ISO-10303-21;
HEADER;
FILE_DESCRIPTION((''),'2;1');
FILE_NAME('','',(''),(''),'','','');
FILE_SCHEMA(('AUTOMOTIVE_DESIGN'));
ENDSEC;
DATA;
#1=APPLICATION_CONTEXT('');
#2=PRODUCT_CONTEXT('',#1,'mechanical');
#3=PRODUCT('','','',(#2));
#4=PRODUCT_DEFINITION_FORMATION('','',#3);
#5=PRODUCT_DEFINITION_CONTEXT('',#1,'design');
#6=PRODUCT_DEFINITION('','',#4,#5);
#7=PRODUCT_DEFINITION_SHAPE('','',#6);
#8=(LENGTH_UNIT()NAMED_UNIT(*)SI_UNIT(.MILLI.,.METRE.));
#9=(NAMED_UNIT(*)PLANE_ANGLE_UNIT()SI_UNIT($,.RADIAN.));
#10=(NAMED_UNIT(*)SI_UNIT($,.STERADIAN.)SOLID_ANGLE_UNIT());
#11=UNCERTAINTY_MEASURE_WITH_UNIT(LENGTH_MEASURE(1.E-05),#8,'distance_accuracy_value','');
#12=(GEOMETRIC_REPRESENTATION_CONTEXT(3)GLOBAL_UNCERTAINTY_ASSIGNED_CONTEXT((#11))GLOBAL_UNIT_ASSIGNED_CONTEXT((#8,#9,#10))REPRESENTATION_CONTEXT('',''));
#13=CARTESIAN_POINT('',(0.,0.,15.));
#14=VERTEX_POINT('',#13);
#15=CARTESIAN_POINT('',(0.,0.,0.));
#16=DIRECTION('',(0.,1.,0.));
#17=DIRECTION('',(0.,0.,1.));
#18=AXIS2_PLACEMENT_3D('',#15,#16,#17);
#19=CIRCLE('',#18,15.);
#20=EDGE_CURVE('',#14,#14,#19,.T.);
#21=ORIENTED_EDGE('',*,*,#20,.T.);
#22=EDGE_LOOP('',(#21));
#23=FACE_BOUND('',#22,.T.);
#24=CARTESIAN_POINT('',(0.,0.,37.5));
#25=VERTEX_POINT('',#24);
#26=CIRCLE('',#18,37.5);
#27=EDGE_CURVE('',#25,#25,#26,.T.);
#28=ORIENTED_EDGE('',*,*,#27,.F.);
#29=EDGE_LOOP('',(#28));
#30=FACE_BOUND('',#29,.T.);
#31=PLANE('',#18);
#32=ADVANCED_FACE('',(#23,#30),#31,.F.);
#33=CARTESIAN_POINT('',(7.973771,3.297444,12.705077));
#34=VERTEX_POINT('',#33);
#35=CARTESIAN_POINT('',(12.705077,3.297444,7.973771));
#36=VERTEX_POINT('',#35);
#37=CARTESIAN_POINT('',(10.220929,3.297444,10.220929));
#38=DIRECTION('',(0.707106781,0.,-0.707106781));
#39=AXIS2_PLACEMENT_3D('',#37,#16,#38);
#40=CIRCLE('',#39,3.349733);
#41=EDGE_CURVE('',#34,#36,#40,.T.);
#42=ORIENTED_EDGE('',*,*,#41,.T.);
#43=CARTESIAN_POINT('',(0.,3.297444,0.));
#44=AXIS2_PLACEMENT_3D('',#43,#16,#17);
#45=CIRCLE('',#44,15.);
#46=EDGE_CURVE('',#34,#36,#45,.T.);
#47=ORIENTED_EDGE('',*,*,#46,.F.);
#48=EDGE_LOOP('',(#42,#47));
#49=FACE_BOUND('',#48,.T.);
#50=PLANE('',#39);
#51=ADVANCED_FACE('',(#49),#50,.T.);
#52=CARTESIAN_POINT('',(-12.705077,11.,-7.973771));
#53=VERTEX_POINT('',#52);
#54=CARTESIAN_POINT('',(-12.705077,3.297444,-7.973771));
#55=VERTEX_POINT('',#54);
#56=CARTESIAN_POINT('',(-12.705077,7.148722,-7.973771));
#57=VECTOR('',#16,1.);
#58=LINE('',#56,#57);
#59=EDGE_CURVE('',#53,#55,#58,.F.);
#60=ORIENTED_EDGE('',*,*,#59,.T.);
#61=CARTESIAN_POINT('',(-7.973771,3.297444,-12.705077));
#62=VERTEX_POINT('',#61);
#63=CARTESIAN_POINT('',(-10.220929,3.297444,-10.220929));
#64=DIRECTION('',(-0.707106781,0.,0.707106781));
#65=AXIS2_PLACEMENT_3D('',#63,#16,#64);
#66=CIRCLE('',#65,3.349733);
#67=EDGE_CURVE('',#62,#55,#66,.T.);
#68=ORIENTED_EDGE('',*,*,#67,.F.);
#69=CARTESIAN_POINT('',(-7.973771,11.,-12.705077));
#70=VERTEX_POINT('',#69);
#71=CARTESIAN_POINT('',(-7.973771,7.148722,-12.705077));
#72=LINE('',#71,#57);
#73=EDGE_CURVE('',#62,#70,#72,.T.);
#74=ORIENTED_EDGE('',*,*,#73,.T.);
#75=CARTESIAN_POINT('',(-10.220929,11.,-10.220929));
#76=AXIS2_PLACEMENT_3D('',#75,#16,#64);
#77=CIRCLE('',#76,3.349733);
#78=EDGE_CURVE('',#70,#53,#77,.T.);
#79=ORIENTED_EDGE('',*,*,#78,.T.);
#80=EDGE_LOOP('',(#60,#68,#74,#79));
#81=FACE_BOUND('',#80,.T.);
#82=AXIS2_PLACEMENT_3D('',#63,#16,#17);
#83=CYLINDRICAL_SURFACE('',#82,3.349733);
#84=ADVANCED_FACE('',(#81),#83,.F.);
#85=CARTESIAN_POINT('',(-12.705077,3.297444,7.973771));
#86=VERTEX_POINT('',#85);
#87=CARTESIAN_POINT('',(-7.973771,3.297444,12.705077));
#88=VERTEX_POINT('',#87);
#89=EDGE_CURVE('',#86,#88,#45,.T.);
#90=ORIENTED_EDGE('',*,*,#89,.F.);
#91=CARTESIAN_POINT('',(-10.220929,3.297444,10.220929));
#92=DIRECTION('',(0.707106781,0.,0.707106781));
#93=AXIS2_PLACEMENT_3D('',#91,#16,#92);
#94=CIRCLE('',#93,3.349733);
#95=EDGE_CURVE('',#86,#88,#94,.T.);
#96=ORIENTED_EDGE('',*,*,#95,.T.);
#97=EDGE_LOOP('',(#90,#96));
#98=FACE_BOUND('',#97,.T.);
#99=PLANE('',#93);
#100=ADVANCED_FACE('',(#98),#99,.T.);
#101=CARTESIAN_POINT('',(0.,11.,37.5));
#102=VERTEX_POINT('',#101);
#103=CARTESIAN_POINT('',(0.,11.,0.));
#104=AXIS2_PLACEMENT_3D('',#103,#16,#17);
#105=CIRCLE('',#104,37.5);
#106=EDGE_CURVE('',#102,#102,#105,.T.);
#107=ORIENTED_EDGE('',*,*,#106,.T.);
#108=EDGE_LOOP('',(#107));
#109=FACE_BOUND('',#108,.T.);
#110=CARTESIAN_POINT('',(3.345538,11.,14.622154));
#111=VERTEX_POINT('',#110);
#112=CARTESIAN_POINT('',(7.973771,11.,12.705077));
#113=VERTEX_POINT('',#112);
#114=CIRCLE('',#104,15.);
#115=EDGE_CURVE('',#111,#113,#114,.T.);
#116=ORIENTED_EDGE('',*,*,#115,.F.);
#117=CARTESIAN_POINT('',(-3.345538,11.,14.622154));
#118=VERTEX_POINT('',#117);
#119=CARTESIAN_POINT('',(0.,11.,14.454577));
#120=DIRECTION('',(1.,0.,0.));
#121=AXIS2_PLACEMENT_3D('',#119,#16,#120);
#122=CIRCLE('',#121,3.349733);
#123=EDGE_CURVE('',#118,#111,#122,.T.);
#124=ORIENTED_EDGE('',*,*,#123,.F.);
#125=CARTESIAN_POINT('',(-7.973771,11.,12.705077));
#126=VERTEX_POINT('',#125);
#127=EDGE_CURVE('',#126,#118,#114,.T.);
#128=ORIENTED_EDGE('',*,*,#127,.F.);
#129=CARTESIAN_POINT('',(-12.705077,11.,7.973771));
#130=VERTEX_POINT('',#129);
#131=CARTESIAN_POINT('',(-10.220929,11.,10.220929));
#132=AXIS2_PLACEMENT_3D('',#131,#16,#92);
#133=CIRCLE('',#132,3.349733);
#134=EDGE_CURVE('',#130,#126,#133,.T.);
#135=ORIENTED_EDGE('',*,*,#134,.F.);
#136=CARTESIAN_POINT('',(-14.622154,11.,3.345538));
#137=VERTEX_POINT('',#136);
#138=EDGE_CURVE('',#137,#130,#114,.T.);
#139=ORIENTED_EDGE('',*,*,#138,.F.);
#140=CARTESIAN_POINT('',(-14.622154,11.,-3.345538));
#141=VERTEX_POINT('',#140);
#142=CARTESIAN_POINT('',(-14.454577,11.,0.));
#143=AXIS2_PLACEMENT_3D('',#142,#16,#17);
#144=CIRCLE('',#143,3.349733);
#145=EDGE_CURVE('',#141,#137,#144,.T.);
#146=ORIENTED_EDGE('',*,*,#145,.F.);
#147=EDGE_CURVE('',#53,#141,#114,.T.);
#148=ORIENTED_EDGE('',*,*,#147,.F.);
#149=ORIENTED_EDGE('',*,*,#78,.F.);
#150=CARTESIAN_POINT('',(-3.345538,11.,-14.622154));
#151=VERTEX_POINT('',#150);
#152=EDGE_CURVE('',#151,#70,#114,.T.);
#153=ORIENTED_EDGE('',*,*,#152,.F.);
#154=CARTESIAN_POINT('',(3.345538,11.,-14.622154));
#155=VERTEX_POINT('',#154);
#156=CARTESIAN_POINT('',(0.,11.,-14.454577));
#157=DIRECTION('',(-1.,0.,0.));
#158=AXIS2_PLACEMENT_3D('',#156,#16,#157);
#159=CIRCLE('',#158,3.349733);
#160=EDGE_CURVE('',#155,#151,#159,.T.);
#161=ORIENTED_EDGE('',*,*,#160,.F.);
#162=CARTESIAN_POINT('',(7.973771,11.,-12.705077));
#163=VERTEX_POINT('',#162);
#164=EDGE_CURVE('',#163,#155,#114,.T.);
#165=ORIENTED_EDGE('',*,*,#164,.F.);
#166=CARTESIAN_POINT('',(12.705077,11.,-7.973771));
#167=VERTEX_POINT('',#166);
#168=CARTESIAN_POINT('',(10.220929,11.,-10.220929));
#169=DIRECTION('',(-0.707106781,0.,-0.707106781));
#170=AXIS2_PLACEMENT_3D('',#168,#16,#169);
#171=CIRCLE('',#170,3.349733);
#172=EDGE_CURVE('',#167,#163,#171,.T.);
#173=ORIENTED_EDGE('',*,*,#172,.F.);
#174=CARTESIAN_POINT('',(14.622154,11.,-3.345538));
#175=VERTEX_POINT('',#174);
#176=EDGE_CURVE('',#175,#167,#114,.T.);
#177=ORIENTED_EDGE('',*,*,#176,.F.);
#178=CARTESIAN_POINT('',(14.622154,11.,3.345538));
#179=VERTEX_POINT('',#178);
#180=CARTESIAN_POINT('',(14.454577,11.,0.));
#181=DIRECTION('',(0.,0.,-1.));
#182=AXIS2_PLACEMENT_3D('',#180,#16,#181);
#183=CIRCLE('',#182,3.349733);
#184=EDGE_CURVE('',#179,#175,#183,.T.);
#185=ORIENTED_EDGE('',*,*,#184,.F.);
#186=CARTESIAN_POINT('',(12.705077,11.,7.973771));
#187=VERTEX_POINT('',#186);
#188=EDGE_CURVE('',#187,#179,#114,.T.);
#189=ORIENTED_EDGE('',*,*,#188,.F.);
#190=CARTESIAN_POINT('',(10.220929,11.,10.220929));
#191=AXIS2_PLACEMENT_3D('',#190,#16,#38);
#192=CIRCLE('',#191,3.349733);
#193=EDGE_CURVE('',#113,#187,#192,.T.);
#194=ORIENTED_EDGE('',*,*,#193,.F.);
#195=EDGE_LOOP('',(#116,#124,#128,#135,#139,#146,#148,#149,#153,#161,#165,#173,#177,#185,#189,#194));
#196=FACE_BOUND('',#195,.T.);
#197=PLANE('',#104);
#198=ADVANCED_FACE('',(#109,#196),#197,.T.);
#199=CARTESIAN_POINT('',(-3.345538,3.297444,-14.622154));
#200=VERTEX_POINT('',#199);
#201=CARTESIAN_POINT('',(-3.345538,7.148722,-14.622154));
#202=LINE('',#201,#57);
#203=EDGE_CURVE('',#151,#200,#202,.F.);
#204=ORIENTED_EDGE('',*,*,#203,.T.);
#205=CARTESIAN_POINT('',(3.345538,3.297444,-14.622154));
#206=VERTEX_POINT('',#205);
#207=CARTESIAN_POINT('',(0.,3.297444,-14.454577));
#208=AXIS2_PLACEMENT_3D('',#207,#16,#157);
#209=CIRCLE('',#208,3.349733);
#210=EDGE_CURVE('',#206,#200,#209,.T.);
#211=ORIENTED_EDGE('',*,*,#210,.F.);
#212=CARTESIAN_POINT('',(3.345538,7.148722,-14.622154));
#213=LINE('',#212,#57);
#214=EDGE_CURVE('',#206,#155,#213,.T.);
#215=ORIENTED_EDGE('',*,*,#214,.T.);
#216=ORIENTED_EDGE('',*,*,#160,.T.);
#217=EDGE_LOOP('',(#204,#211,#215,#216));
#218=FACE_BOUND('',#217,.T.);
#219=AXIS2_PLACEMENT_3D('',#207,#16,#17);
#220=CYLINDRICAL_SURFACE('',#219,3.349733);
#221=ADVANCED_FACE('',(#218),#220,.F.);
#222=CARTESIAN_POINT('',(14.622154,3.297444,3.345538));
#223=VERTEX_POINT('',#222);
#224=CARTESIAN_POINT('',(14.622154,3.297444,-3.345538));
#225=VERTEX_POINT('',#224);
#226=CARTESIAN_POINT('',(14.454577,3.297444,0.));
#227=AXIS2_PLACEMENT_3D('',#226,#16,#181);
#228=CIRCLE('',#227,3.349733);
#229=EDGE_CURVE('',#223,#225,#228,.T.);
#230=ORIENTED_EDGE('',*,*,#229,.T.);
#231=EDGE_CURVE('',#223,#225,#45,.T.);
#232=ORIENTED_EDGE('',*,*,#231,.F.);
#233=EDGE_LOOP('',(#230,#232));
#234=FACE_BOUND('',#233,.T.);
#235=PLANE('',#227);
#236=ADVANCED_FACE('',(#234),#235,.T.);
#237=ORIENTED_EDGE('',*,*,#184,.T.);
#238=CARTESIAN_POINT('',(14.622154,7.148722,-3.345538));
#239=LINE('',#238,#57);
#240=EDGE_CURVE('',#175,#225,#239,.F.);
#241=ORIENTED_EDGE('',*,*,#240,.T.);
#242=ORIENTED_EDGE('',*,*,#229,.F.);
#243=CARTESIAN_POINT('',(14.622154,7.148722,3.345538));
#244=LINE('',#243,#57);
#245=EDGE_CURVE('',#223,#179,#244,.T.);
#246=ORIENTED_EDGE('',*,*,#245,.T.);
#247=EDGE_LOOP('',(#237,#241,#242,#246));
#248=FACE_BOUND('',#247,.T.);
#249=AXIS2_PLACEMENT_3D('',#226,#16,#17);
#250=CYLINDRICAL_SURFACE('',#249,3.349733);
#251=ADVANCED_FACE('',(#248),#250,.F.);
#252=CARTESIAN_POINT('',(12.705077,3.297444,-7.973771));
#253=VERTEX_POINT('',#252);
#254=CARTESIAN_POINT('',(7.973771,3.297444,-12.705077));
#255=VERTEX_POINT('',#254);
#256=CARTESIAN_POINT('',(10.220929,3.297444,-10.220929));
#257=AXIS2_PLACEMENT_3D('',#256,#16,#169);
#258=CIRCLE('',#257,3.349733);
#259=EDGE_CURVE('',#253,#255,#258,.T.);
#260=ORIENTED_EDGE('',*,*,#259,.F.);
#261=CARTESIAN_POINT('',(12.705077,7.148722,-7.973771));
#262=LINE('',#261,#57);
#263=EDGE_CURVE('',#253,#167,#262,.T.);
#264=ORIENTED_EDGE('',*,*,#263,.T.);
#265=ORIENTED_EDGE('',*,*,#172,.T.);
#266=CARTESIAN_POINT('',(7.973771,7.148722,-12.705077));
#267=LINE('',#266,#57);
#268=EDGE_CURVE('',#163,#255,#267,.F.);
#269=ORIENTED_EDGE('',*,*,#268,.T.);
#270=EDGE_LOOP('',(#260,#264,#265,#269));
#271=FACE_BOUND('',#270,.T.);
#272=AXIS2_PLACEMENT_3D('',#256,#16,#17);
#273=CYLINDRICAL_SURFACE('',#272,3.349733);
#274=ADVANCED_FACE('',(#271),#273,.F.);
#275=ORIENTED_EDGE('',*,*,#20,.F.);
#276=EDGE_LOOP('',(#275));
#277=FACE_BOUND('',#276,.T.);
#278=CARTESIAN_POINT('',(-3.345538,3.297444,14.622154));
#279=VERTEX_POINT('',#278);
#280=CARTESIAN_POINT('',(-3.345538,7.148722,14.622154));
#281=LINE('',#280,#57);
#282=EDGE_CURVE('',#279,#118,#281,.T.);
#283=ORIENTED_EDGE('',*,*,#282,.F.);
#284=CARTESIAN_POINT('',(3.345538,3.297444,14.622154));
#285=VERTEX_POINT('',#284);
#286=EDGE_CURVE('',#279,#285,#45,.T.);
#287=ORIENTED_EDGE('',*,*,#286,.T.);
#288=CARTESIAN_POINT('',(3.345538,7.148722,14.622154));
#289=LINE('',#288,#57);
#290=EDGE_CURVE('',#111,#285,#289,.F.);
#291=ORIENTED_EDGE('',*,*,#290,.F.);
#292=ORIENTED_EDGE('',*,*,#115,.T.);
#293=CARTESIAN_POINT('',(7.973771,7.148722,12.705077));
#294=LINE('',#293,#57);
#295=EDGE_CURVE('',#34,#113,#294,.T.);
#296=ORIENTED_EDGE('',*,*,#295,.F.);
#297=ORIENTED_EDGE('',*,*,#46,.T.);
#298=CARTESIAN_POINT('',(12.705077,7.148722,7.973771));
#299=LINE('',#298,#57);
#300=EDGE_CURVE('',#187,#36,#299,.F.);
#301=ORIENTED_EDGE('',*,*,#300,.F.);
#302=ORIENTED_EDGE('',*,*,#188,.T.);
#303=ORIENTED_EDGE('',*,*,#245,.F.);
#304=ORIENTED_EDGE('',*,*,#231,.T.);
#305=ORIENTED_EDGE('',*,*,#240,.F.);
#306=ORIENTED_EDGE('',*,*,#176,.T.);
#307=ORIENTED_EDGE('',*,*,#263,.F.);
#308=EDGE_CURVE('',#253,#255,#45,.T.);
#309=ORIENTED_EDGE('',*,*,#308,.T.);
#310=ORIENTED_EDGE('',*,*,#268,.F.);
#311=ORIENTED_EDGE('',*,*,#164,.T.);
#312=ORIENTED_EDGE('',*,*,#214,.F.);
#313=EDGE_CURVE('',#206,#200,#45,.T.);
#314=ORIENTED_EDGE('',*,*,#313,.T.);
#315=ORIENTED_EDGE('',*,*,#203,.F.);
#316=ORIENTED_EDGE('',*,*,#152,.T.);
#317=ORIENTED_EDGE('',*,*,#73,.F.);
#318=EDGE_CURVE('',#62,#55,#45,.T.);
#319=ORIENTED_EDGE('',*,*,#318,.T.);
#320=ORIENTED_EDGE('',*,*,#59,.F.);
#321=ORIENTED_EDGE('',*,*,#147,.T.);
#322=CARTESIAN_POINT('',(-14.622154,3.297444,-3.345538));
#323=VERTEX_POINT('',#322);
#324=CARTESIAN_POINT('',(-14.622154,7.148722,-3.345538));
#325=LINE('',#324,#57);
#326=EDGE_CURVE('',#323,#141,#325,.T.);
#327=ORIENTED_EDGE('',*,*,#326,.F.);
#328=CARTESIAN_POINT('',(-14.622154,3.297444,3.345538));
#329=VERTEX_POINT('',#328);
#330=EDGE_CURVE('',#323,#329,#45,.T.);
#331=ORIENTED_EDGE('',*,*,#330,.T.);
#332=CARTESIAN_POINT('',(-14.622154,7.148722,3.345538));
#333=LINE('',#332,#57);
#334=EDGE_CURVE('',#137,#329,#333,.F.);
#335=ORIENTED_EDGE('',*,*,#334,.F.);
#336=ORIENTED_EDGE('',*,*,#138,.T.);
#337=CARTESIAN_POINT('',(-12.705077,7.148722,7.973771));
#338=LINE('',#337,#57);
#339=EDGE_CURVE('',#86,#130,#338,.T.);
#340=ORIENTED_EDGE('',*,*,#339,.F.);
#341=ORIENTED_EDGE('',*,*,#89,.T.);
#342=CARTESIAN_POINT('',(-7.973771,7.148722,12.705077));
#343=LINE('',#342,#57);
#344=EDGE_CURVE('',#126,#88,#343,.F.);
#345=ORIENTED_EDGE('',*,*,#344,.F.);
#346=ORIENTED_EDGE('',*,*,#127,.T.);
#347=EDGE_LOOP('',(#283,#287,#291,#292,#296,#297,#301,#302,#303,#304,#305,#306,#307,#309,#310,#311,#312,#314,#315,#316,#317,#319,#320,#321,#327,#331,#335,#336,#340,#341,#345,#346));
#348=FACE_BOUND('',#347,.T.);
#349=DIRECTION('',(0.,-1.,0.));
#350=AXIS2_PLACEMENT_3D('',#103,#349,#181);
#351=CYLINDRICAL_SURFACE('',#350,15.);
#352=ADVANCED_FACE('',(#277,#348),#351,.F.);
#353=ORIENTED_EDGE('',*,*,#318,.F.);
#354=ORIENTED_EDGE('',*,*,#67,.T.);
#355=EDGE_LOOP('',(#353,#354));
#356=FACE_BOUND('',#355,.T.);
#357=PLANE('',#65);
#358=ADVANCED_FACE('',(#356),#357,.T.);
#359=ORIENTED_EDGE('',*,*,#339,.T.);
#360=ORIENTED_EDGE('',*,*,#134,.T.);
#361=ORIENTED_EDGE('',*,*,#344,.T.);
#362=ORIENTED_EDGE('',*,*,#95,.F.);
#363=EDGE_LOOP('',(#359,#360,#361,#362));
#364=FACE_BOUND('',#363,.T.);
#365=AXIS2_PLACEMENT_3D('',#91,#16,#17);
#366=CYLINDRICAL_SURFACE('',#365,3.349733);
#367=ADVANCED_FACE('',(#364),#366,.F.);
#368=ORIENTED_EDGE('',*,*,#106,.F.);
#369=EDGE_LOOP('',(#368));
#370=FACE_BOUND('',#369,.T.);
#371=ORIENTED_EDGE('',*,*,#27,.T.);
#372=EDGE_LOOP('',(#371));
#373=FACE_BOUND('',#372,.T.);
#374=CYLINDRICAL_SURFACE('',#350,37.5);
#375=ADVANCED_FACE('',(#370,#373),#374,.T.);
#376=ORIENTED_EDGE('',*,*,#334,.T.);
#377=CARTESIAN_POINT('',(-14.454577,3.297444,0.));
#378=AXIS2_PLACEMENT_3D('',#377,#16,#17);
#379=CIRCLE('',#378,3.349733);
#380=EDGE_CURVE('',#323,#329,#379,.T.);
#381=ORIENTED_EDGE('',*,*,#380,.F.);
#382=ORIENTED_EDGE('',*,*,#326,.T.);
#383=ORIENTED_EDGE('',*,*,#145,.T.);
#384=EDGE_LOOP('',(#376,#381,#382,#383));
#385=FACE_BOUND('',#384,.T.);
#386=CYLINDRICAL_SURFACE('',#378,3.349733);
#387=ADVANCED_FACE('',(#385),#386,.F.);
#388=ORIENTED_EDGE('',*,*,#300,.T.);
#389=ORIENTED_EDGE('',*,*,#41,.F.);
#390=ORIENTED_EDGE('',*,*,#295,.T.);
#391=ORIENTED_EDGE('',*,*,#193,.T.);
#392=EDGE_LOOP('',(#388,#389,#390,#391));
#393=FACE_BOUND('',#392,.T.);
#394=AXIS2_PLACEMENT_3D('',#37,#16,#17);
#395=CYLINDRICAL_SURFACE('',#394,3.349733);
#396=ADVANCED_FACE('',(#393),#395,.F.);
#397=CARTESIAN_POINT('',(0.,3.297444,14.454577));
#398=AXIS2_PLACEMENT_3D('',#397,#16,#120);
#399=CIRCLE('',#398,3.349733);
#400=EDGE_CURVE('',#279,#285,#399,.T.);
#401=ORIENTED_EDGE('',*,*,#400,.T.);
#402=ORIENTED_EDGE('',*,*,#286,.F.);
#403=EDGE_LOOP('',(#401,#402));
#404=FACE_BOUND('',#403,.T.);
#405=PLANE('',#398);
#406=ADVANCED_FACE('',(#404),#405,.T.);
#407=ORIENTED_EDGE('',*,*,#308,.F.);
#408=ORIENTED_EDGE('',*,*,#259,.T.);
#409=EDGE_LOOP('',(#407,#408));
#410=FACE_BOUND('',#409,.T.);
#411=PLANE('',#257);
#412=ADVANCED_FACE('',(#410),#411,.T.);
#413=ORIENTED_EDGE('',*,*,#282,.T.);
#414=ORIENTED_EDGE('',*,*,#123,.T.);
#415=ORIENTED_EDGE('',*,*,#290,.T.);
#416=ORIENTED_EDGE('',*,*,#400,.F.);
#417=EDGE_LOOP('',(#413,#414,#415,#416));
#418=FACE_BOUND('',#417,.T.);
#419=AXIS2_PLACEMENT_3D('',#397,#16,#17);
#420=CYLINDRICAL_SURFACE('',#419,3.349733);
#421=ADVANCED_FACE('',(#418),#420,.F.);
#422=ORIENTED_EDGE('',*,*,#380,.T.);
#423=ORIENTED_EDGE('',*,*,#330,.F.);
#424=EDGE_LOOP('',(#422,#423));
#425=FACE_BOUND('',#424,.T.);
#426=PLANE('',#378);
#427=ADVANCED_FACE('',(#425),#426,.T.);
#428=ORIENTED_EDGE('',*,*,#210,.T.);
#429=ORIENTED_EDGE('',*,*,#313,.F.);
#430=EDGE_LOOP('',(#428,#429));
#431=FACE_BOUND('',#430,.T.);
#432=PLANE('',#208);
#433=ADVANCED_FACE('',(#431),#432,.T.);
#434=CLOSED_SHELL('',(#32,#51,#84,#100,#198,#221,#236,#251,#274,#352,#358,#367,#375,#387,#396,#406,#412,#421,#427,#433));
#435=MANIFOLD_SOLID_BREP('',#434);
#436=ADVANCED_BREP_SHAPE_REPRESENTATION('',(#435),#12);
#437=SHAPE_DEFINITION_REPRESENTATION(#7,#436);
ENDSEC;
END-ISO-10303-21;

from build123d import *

# Parameters (mm, degrees)
SKETCH1_R           = 37.5
BOSS_EXTRUDE1_DEPTH = 11
SKETCH2_R           = 15
CUT_EXTRUDE1_DEPTH  = 55.161794653
SKETCH3_R           = 3.349732629
CUT_EXTRUDE2_DEPTH  = 7.702556447
CIRPATTERN1_COUNT   = 8


with BuildPart() as part:
    # Sketch1 → Boss-Extrude1 (new body)
    with BuildSketch(Plane(origin=(0, 0, 0), x_dir=(1, 0, 0), z_dir=(0, 1, 0))):
        Circle(SKETCH1_R)
    extrude(amount=BOSS_EXTRUDE1_DEPTH)

    # Sketch2 → Cut-Extrude1 (cut, through all)
    with BuildSketch(Plane(origin=(0, 0, 0), x_dir=(1, 0, 0), z_dir=(0, 1, 0))):
        Circle(SKETCH2_R)
    extrude(amount=CUT_EXTRUDE1_DEPTH, mode=Mode.SUBTRACT)

    # Sketch3 → Cut-Extrude2 (cut)
    with BuildSketch(Plane(origin=(0, 11, 0), x_dir=(1, 0, 0), z_dir=(0, 1, 0))):
        with Locations((-14.45457695, 0)):
            Circle(SKETCH3_R)
    cut_extrude2 = extrude(amount=-CUT_EXTRUDE2_DEPTH, mode=Mode.SUBTRACT)

    # CirPattern1: Cut-Extrude2 ×8 about axis
    cirpattern1_axis = Axis((0, 0, 0), (0, 1, 0))
    for i in range(1, CIRPATTERN1_COUNT):
        add(cut_extrude2.rotate(cirpattern1_axis, i * 360 / CIRPATTERN1_COUNT), mode=Mode.SUBTRACT)


solid = part.part
